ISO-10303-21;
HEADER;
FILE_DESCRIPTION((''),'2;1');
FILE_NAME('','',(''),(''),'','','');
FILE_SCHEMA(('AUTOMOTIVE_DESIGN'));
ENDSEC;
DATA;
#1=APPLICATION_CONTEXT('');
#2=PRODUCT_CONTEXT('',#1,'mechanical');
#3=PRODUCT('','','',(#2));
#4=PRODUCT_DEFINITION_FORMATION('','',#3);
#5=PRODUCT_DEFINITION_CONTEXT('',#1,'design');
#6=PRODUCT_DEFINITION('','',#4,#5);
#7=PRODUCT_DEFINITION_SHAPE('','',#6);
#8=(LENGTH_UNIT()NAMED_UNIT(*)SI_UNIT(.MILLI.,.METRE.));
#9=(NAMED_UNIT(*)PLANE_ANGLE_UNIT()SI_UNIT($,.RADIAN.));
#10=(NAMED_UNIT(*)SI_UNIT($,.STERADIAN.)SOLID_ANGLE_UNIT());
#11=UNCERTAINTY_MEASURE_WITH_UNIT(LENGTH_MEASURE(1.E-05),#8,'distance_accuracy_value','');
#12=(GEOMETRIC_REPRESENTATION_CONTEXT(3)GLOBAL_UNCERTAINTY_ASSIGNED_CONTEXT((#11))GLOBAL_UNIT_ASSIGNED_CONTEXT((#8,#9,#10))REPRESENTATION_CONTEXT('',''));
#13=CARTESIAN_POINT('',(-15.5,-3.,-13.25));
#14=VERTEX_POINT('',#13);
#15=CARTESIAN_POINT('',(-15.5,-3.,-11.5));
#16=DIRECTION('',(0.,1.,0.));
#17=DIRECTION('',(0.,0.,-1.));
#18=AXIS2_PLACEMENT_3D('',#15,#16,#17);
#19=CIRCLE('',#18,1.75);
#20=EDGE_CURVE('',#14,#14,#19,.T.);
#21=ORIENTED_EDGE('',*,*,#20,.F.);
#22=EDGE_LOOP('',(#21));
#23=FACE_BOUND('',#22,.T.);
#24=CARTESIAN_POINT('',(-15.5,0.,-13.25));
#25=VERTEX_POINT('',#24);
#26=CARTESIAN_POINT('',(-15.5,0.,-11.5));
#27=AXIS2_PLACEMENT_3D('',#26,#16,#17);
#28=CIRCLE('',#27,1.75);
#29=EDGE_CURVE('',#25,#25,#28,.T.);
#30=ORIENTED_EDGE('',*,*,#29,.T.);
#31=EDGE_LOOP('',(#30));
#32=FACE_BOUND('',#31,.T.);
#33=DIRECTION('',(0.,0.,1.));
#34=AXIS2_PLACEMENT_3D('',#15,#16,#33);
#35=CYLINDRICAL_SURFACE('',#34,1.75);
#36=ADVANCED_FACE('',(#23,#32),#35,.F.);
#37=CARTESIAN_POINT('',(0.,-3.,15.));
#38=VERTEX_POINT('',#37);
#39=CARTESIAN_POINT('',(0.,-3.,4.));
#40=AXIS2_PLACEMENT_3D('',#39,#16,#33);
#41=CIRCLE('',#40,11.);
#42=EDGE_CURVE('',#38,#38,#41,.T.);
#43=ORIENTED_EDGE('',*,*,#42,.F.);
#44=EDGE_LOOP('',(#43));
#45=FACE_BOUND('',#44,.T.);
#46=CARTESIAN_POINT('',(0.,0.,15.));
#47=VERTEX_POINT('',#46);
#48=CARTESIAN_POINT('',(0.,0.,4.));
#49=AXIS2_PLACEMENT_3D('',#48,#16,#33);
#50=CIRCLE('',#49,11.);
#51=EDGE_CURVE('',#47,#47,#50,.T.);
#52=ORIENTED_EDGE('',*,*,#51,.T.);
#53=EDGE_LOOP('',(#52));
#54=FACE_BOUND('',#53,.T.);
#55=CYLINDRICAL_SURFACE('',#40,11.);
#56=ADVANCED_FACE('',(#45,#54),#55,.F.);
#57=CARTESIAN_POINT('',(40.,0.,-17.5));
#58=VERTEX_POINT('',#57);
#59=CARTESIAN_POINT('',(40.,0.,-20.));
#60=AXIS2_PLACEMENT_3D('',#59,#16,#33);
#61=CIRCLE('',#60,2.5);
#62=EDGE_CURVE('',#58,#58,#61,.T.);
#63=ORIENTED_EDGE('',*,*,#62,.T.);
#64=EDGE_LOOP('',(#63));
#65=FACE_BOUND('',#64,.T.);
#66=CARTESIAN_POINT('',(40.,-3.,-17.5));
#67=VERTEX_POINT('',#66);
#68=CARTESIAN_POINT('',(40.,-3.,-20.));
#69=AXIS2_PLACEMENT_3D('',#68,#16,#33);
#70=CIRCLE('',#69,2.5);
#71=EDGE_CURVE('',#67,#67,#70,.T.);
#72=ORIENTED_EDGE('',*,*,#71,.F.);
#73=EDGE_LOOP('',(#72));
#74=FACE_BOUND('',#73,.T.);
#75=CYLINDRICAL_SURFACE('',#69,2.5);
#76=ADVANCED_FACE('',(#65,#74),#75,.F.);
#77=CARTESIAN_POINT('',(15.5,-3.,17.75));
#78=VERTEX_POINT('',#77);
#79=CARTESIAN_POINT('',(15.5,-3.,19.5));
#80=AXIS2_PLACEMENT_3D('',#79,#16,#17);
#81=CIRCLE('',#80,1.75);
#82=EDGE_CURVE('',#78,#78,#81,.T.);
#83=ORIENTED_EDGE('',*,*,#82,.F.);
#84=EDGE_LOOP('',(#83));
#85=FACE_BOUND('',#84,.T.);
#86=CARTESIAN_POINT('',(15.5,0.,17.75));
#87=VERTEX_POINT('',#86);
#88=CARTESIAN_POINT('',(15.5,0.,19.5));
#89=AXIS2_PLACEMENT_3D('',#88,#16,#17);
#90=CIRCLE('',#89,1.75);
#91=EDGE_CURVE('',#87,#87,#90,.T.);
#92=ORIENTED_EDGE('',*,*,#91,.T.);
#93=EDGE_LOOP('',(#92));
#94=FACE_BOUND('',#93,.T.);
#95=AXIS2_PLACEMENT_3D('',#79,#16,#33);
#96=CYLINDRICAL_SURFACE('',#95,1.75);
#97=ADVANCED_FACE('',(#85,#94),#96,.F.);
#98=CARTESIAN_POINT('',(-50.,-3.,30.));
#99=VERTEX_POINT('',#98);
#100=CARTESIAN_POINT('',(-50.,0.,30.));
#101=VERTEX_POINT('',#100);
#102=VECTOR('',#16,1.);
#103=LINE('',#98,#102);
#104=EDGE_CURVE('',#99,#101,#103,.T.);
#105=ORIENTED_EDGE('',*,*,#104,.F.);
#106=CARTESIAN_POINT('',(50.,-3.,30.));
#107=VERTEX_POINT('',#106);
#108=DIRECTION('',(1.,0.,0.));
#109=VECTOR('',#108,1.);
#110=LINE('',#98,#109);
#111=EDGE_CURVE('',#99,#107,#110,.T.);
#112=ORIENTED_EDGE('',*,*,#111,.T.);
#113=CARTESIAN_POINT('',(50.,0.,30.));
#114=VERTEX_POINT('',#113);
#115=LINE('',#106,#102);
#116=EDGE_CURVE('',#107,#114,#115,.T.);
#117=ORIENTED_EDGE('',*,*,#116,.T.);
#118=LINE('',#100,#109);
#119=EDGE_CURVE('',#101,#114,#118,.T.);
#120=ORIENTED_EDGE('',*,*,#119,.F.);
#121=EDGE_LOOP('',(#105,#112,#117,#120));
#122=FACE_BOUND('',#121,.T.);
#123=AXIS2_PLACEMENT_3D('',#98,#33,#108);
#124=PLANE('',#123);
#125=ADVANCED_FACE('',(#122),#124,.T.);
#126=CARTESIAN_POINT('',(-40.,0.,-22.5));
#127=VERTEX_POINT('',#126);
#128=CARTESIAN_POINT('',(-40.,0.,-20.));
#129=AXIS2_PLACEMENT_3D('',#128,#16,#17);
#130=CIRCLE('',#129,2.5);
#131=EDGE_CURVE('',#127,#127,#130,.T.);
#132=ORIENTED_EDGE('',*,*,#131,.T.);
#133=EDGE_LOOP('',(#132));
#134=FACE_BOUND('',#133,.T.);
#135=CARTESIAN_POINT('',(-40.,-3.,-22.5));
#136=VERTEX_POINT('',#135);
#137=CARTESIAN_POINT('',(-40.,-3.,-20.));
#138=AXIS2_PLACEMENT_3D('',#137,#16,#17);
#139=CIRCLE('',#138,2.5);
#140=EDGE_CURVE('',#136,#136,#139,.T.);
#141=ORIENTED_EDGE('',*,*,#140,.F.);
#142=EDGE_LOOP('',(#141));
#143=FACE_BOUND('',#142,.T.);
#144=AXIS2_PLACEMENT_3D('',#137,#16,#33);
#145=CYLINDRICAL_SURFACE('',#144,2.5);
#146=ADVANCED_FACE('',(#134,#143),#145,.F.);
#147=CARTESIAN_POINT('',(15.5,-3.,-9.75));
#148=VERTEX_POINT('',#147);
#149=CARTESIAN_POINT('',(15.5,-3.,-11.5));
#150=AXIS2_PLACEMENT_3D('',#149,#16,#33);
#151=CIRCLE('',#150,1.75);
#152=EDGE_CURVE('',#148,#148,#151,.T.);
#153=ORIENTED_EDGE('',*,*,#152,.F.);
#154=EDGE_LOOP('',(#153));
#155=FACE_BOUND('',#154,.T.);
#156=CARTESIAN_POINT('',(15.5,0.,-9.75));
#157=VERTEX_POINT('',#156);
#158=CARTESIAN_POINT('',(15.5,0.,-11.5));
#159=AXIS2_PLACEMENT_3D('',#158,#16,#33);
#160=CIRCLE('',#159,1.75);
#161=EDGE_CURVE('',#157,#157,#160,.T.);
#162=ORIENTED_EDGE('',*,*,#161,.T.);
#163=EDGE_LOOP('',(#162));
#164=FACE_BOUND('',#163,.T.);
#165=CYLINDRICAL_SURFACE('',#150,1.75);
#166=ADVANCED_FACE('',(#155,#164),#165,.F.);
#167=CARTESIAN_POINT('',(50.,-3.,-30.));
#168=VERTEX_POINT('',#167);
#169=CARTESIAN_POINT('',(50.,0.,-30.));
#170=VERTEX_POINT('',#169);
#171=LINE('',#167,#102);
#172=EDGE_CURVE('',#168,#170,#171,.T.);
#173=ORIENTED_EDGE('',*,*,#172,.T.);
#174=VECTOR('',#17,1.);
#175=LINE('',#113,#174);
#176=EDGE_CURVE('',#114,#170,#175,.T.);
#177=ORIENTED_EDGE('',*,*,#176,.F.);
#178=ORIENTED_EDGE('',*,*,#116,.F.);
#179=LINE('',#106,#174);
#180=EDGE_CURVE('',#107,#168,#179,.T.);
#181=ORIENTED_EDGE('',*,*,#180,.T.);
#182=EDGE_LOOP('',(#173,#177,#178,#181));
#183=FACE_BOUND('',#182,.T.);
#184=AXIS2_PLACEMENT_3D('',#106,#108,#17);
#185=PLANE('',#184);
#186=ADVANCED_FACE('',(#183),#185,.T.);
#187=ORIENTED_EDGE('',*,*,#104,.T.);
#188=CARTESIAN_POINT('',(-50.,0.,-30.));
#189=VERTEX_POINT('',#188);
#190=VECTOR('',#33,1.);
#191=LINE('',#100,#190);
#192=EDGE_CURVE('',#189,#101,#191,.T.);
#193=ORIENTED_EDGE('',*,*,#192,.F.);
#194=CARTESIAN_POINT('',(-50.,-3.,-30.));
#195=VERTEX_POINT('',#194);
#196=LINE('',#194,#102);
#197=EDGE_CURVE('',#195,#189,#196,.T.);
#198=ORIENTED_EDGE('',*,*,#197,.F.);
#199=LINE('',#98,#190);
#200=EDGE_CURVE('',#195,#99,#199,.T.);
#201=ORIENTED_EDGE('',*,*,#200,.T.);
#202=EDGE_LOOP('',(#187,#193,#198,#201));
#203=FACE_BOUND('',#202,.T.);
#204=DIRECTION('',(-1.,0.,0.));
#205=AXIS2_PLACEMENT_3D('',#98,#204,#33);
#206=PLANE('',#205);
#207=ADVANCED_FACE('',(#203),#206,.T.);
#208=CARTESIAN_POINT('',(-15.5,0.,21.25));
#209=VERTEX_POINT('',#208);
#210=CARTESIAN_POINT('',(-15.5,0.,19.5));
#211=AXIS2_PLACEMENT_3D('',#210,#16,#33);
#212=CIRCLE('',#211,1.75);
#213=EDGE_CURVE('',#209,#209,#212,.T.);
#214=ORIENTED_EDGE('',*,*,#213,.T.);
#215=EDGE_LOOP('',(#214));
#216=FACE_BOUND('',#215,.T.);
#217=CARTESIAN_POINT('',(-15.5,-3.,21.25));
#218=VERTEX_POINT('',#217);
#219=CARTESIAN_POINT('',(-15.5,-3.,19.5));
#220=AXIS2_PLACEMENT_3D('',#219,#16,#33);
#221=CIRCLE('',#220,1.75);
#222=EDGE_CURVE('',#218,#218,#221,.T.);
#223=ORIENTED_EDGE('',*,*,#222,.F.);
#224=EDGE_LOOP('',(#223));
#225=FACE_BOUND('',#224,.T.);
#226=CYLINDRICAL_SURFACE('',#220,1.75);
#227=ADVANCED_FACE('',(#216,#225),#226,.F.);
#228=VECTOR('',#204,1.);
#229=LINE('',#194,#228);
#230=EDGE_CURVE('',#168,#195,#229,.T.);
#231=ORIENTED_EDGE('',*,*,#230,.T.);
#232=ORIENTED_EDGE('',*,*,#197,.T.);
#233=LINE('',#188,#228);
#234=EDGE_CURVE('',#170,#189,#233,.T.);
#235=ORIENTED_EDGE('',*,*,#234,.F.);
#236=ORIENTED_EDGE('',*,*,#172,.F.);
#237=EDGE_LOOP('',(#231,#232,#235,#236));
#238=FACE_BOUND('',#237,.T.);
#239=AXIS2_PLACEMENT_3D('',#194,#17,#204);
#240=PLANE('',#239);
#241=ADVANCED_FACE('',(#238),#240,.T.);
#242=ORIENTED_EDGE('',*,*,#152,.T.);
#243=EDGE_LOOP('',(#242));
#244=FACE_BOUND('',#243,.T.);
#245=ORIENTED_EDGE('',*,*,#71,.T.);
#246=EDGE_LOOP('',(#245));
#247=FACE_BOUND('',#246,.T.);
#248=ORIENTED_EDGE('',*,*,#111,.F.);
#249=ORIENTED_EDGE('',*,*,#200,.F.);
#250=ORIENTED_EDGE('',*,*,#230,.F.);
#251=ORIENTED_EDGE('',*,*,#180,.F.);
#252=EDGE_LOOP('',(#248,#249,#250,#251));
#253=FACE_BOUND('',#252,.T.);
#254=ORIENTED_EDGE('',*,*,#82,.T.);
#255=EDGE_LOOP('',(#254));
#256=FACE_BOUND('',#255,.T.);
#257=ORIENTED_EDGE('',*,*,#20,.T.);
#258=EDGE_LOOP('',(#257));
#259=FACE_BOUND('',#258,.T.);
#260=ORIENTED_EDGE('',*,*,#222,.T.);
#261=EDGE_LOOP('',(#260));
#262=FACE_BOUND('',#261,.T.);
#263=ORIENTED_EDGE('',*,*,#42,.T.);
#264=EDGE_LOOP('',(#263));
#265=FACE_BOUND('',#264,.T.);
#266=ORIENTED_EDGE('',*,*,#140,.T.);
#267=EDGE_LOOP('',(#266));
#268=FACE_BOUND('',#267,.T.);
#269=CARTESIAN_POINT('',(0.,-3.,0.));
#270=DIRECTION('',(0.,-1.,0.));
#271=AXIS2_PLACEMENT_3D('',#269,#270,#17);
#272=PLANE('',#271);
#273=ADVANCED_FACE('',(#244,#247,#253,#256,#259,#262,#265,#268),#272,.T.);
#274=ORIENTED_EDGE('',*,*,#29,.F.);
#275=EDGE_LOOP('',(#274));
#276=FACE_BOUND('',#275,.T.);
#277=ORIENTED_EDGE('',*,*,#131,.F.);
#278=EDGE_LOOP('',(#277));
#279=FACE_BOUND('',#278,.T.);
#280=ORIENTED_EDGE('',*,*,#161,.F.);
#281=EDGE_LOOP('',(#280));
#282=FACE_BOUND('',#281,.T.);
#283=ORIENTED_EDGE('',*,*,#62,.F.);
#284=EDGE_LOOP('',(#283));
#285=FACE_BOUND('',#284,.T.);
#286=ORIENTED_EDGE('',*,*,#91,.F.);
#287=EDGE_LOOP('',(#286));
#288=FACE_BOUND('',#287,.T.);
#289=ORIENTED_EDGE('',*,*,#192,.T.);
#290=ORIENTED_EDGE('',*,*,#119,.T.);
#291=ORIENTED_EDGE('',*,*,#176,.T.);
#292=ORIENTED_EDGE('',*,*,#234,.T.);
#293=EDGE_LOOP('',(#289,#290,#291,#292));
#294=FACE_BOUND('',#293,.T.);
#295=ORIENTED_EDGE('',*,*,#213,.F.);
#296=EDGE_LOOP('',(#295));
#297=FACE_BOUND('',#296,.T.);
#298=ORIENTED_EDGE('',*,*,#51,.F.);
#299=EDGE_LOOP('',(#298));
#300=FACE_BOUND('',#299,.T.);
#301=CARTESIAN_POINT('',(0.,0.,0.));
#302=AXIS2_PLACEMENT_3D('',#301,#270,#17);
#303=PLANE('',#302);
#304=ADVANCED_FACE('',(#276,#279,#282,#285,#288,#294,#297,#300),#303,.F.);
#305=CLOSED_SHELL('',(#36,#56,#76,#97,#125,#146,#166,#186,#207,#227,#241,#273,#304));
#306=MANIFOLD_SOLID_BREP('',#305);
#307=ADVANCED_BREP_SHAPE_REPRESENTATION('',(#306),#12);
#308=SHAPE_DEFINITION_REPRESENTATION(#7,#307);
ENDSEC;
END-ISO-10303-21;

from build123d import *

# Parameters (mm, degrees)
SKETCH1_W          = 100
SKETCH1_H          = 60
BASE_FLANGE1_DEPTH = 3
SKETCH6_R          = 2.5
SKETCH6_R_2        = 11
SKETCH6_R_3        = 1.75
CUT_EXTRUDE1_DEPTH = 10


# Sheet-metal steps are written as plain solids
with BuildPart() as part:
    # Sketch1 → Base-Flange1 (new body)
    with BuildSketch(Plane(origin=(0, 0, 0), x_dir=(1, 0, 0), z_dir=(0, 1, 0))):
        Rectangle(SKETCH1_W, SKETCH1_H)
    extrude(amount=-BASE_FLANGE1_DEPTH)

    # Sketch6 → Cut-Extrude1 (cut)
    with BuildSketch(Plane(origin=(0, 0, 0), x_dir=(1, 0, 0), z_dir=(0, 1, 0))):
        with Locations(Location((40, 20, 0), (0, 0, 270))):
            Circle(SKETCH6_R)
        with Locations(Location((-40, 20, 0), (0, 0, 90))):
            Circle(SKETCH6_R)
        with Locations(Location((0, -4, 0), (0, 0, 270))):
            Circle(SKETCH6_R_2)
        with Locations(Location((15.5, 11.5, 0), (0, 0, 270))):
            Circle(SKETCH6_R_3)
        with Locations(Location((15.5, -19.5, 0), (0, 0, 90))):
            Circle(SKETCH6_R_3)
        with Locations(Location((-15.5, -19.5, 0), (0, 0, 270))):
            Circle(SKETCH6_R_3)
        with Locations(Location((-15.5, 11.5, 0), (0, 0, 90))):
            Circle(SKETCH6_R_3)
    extrude(amount=-CUT_EXTRUDE1_DEPTH, mode=Mode.SUBTRACT)


solid = part.part
